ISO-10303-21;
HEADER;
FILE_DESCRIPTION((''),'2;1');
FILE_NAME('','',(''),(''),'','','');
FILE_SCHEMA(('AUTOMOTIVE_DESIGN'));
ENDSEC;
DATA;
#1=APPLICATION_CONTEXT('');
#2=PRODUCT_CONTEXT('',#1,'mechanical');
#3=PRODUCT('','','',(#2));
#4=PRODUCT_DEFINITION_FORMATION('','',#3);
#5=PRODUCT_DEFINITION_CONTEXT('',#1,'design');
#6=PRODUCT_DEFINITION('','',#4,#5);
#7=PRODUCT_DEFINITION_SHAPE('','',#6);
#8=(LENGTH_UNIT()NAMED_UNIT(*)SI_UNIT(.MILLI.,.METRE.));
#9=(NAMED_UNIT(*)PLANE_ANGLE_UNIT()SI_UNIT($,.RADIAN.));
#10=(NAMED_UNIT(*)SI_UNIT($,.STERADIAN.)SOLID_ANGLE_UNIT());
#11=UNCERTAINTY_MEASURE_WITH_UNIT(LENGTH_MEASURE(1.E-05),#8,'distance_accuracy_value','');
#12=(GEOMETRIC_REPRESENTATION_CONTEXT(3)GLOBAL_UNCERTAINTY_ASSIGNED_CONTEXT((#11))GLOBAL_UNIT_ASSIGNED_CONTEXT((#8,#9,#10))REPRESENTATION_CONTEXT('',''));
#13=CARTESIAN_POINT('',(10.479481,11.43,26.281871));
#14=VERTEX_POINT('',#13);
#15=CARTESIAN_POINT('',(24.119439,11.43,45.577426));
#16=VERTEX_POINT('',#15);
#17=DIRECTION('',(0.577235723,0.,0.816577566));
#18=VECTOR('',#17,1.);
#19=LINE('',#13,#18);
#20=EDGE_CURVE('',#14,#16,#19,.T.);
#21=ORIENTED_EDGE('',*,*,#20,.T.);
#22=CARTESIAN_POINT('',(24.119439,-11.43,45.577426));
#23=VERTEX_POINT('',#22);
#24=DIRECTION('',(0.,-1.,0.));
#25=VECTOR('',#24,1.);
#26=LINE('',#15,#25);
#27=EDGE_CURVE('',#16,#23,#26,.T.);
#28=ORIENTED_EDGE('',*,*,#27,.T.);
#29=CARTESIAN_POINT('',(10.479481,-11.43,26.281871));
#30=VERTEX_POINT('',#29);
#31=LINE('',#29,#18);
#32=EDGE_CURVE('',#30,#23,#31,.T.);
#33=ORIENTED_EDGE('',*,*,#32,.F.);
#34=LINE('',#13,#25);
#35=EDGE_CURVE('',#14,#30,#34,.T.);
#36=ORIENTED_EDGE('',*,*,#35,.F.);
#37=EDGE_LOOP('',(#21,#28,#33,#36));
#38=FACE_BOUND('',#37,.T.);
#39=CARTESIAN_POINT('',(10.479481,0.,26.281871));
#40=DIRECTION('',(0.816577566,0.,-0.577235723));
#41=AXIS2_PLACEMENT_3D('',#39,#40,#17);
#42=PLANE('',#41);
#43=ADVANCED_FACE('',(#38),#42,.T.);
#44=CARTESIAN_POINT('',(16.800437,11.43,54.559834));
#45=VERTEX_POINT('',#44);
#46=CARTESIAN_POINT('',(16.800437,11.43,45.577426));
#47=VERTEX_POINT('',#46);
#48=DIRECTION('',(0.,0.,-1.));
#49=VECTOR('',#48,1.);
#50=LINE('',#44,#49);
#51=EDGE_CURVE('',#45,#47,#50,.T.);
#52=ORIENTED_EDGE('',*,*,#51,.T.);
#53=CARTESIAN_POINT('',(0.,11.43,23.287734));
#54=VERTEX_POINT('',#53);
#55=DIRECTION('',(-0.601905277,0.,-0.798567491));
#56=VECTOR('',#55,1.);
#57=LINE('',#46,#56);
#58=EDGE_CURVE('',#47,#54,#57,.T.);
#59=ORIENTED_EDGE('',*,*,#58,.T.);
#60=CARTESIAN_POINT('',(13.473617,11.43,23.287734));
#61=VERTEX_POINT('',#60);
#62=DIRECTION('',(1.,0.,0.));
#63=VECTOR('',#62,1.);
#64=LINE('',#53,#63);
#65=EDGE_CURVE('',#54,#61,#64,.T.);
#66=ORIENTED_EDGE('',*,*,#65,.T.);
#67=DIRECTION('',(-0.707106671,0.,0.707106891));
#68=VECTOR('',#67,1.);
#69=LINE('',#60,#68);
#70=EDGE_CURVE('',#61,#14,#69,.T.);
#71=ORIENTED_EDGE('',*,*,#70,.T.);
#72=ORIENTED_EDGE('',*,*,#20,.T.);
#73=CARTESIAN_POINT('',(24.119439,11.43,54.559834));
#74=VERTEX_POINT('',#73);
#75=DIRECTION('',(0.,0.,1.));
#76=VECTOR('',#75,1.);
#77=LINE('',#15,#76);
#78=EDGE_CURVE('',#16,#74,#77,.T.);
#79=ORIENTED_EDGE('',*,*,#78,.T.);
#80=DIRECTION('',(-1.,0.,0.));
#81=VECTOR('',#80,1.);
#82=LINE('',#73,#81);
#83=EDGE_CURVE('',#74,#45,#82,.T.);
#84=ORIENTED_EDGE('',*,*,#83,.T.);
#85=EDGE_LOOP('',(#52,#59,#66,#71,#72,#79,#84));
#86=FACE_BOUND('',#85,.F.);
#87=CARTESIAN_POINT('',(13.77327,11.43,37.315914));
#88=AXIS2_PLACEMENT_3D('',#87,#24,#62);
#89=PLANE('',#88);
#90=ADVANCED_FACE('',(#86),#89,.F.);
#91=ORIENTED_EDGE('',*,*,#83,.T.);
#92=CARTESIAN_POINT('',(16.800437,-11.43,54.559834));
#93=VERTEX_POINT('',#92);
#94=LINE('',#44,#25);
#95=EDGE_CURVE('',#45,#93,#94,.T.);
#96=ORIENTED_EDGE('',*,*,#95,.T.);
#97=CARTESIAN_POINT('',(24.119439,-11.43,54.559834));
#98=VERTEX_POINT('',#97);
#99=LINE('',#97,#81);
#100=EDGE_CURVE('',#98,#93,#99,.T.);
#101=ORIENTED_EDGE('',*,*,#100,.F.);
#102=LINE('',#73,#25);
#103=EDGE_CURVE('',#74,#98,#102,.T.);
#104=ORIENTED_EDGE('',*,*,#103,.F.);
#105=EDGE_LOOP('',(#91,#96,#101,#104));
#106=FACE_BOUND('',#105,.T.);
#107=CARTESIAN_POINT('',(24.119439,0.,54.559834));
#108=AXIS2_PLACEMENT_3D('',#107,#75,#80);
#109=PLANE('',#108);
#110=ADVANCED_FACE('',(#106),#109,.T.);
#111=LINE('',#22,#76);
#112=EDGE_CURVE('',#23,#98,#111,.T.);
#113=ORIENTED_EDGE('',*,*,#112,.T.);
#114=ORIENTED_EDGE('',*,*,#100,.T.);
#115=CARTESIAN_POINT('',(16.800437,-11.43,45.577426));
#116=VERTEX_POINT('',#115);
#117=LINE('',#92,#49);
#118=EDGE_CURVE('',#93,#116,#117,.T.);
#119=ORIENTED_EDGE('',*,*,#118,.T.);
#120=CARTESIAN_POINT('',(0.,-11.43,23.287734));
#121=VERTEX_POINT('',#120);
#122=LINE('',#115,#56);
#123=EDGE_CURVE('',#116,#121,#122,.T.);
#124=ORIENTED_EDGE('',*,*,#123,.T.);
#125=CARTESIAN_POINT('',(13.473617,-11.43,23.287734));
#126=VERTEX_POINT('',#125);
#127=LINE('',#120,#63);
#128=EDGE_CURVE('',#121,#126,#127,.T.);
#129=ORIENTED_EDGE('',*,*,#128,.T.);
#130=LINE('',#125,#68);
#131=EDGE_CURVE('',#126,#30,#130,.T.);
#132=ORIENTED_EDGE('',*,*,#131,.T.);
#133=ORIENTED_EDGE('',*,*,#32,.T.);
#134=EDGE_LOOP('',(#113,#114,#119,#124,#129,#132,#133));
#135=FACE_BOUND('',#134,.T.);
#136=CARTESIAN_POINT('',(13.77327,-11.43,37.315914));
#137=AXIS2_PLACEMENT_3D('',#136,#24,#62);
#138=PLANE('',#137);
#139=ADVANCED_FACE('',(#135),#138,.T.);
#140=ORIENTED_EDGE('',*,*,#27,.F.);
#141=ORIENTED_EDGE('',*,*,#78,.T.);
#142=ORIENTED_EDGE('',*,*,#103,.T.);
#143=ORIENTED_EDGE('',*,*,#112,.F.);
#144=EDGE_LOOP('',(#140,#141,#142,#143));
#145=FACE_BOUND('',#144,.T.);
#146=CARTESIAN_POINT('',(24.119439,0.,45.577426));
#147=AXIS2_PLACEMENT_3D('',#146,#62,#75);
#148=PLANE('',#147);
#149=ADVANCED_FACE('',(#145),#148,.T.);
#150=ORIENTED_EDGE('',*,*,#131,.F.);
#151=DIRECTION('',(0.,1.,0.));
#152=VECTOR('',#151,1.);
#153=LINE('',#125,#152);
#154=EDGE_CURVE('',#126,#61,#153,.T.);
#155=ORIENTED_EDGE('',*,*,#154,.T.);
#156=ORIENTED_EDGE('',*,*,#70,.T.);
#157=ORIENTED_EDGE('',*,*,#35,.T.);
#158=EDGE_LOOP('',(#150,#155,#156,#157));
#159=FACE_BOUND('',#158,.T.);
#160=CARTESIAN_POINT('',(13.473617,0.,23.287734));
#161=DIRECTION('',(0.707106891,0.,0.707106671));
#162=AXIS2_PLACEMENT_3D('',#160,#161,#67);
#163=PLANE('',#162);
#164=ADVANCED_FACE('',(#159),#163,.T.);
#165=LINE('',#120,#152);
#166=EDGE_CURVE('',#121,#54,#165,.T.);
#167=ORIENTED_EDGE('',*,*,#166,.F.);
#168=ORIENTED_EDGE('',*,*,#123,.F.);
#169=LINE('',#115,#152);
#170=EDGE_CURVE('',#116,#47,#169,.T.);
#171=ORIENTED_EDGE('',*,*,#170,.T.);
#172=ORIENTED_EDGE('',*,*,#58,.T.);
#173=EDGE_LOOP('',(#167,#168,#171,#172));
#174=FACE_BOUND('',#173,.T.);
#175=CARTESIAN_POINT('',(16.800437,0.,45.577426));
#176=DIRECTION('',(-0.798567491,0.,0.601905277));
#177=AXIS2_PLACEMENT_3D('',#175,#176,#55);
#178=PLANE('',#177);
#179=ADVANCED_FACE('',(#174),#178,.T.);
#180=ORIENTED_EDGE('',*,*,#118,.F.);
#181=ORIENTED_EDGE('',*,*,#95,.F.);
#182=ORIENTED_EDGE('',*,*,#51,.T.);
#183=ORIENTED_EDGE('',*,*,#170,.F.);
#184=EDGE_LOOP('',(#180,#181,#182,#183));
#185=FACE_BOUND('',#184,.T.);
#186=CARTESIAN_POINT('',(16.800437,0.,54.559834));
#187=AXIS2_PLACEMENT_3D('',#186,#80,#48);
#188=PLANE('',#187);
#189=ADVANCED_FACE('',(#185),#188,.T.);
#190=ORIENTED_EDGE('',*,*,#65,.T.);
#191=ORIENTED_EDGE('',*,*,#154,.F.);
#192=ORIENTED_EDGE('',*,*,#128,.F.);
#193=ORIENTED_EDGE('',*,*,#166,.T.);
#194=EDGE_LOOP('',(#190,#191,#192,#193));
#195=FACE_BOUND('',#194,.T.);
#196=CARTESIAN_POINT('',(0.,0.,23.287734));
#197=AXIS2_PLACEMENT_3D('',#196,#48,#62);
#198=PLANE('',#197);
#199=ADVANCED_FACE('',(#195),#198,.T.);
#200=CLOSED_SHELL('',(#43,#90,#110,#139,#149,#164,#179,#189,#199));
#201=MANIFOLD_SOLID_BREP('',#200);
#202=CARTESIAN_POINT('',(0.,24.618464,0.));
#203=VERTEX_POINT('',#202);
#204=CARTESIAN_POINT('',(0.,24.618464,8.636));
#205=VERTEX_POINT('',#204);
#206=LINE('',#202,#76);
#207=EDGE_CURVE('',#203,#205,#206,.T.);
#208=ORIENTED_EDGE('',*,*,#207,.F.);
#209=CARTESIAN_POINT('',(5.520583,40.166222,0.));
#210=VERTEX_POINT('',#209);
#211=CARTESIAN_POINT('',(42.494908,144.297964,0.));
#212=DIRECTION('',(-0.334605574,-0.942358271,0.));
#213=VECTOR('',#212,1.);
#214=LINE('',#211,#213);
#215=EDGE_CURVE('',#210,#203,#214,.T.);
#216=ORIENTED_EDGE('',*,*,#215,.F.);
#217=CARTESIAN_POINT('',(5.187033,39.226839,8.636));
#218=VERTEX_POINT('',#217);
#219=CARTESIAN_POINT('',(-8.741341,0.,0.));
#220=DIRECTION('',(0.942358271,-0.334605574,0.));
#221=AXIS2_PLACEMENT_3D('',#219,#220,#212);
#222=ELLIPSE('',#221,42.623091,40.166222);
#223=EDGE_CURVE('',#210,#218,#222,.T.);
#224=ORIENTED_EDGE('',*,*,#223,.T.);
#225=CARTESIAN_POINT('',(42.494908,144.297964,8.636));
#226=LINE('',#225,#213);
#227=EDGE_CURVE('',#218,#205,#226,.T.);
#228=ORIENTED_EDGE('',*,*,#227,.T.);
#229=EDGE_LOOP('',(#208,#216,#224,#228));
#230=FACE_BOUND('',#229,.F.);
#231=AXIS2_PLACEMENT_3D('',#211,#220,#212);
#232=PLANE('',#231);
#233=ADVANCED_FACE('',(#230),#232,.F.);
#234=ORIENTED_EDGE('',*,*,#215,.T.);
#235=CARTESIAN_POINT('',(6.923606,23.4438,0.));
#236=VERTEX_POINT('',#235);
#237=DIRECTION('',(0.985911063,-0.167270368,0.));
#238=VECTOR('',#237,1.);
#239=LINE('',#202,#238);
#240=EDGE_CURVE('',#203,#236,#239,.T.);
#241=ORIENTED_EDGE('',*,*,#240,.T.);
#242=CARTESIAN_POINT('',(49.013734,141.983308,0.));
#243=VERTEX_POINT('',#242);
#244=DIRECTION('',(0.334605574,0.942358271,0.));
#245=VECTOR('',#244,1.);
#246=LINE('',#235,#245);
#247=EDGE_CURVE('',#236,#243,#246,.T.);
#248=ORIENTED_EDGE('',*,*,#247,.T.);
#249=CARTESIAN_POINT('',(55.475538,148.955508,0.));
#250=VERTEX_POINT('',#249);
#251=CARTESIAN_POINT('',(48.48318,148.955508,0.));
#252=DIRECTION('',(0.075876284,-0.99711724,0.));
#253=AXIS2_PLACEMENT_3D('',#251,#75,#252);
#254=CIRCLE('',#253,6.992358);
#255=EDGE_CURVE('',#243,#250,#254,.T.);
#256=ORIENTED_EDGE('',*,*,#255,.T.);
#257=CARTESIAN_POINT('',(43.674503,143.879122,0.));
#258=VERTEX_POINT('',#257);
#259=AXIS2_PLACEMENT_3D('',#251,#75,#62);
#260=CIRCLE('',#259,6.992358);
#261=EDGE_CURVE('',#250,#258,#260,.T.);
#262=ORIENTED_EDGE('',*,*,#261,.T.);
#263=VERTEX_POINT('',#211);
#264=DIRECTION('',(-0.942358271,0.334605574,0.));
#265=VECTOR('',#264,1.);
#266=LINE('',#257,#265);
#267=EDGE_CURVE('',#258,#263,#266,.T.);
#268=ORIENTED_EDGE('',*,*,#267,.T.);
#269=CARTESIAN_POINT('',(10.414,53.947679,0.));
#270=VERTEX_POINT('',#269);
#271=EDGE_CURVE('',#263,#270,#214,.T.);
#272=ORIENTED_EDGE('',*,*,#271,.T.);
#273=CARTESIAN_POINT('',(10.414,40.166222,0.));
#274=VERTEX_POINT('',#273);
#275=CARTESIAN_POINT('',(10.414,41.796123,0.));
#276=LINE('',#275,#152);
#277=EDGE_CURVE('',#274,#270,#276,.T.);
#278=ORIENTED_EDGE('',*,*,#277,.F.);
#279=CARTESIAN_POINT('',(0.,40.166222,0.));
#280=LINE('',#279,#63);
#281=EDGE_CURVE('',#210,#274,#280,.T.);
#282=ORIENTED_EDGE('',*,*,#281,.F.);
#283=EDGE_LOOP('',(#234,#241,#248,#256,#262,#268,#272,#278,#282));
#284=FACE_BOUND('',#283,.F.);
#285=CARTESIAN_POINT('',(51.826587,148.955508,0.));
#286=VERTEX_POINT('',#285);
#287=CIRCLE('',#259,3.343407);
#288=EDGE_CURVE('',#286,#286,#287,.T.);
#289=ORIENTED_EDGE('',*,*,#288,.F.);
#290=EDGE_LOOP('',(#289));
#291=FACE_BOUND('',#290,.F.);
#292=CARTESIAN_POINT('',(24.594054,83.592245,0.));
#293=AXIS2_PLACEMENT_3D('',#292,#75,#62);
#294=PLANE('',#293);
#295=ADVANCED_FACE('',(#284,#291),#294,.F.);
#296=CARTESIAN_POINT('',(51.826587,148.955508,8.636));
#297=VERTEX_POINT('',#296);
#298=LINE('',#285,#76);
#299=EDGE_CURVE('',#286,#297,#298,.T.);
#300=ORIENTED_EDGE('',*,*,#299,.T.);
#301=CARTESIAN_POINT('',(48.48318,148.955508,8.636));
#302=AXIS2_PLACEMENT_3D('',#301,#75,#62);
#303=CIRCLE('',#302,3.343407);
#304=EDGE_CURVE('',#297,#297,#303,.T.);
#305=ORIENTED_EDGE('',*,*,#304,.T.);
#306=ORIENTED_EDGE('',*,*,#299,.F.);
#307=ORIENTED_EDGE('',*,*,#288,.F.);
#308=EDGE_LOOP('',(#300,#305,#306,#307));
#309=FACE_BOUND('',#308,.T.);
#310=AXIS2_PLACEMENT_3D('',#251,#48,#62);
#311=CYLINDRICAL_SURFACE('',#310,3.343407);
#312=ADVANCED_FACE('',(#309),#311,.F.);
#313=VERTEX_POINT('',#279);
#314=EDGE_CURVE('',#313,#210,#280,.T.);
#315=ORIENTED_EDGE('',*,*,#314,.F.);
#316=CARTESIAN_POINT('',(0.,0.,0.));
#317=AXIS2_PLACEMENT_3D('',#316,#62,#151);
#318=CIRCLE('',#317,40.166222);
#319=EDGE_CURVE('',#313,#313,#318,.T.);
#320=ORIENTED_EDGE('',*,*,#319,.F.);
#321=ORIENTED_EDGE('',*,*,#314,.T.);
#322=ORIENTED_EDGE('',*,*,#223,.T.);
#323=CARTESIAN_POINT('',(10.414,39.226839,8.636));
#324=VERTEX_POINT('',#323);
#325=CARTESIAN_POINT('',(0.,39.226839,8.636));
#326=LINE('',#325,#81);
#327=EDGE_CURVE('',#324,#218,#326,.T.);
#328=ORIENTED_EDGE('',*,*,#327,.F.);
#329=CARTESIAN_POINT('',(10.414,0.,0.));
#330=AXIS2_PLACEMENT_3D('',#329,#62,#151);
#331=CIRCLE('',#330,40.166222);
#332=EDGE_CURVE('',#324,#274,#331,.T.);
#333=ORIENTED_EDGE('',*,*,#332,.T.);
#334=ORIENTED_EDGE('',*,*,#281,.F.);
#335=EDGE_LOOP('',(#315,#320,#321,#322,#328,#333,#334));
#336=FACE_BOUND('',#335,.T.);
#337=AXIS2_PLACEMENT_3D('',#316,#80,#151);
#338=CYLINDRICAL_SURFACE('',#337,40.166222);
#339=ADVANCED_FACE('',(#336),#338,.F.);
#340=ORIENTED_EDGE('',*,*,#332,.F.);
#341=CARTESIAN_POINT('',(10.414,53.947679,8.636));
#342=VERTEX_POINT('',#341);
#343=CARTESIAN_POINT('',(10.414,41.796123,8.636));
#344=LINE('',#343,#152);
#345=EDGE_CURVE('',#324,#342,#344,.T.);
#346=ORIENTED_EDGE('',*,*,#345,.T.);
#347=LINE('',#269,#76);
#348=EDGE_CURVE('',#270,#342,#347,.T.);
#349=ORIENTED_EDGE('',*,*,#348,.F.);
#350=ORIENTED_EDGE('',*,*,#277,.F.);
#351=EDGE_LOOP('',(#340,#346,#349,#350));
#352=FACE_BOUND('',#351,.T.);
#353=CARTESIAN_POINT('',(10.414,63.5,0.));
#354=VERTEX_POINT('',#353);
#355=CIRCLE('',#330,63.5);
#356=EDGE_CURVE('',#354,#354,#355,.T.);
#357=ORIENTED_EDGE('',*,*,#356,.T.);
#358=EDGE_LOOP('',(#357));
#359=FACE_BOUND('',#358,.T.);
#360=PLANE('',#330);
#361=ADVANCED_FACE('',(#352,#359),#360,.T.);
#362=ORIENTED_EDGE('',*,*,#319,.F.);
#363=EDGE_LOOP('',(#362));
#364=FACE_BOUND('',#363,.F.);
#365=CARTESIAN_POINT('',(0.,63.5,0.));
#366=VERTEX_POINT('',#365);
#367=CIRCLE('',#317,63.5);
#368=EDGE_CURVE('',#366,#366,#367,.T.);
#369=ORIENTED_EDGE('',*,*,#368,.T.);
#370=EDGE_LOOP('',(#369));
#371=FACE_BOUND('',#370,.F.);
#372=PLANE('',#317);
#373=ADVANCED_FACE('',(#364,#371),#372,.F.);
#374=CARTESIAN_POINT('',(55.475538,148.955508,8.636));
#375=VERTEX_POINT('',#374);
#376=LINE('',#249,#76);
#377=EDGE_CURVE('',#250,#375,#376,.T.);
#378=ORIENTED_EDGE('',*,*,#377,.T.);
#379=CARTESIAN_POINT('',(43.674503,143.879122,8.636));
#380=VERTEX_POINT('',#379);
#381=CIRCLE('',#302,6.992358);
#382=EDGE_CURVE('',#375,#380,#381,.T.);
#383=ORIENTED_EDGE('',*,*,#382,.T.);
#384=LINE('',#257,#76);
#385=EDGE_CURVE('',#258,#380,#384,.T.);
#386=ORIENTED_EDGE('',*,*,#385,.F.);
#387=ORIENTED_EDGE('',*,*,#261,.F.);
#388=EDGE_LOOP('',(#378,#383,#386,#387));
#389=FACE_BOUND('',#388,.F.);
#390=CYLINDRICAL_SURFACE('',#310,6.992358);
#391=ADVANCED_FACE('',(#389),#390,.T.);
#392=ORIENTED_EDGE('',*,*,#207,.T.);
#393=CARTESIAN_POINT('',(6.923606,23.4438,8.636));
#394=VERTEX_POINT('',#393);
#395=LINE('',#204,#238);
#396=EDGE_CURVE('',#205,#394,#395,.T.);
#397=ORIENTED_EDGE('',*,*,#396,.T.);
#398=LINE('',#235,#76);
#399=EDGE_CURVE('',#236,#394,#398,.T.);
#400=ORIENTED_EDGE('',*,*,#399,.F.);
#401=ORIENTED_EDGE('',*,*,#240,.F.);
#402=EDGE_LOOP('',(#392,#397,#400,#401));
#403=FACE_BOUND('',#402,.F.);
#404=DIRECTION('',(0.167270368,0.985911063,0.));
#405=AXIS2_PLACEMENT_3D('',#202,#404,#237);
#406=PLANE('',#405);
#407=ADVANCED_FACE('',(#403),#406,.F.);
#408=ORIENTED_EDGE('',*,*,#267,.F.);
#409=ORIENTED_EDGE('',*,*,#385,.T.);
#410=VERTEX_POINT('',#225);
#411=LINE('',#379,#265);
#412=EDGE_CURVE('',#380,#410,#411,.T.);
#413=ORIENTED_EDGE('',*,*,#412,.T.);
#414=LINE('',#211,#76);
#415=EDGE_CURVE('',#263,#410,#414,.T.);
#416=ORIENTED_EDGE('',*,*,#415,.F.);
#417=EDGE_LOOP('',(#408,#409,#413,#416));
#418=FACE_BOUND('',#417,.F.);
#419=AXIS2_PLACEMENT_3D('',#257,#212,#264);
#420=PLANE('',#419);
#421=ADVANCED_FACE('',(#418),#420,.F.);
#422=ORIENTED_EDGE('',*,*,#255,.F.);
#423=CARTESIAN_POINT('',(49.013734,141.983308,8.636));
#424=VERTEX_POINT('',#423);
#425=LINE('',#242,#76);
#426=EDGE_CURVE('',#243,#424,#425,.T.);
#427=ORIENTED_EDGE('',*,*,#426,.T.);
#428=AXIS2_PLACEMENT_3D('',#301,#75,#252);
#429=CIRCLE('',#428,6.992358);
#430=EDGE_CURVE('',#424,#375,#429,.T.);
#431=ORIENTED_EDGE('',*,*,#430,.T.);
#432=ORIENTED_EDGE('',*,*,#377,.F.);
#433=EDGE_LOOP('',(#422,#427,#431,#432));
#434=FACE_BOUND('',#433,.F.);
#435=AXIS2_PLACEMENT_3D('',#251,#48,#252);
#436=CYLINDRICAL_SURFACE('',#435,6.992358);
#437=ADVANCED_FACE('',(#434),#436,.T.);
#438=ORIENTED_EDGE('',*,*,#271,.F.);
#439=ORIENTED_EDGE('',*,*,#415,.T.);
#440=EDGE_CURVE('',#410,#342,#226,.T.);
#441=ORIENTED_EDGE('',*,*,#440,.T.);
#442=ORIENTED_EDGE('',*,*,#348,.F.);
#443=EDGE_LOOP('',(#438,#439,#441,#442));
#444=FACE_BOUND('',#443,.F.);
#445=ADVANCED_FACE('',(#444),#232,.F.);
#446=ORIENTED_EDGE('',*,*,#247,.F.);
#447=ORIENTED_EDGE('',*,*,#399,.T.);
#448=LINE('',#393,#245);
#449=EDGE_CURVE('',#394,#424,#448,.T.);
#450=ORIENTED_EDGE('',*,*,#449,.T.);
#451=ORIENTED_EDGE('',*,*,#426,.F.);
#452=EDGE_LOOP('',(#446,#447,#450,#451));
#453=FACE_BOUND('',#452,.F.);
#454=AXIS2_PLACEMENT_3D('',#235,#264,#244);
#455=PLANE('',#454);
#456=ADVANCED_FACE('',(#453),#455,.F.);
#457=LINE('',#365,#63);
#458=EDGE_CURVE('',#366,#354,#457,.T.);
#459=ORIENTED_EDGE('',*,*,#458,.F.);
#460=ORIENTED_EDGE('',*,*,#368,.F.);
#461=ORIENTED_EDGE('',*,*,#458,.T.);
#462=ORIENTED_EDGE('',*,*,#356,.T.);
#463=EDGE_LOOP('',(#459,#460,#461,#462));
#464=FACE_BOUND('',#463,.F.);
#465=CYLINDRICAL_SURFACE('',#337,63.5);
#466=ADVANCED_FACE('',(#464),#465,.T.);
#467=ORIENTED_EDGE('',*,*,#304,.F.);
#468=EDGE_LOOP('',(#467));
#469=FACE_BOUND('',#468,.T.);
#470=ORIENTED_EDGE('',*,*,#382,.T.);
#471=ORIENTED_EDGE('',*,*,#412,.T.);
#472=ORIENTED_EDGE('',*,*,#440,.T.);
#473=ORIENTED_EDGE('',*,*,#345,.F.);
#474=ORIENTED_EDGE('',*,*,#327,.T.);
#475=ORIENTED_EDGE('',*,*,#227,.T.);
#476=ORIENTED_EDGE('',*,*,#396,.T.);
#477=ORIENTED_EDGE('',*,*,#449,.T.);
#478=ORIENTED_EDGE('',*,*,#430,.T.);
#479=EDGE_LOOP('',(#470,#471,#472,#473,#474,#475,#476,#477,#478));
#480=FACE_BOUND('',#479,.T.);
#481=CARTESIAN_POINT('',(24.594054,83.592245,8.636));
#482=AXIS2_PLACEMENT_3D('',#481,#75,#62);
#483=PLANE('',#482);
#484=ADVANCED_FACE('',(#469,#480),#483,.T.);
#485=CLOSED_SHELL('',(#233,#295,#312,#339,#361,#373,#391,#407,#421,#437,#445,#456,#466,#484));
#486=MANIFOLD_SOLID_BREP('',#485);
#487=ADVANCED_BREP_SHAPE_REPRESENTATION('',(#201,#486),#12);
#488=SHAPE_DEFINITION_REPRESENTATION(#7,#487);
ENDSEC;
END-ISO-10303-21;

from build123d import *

# Parameters (mm, degrees)
F1_R     = 3.3434072236
F2_DEPTH = 8.636
F0_R     = 63.5
F0_R_2   = 40.1662219946
F3_DEPTH = 10.414
F5_DEPTH = 11.43


# Not quite as in the source:
# - a feature of the source that left no trace in its solid (it failed there, or was rolled back) is left out


with BuildPart() as f2:
    # F1 (on Top) → F2 (new body)
    with BuildSketch(Plane.XY):
        with BuildLine():
            Line((42.4949078619, 144.2979639482), (0, 24.6184635907))
            Line((0, 24.6184635907), (6.9236060732, 23.4437996919))
            Line((6.9236060732, 23.4437996919), (49.013733896, 141.9833076298))
            ThreePointArc((49.013733896, 141.9833076298), (46.1434978735, 142.3662019346), (43.6745030246, 143.8791220613))
            Line((43.6745030246, 143.8791220613), (42.4949078619, 144.2979639482))
        make_face()
        with BuildLine():
            ThreePointArc((55.4755375751, 148.9555081438), (45.7201126941, 155.3787883051), (43.6745030246, 143.8791220613))
            Line((43.6745030246, 143.8791220613), (49.013733896, 141.9833076298))
            ThreePointArc((49.013733896, 141.9833076298), (53.6116733091, 144.2024436904), (55.4755375751, 148.9555081438))
        make_face()
        with Locations((48.4831797689, 148.9555081438)):
            Circle(F1_R, mode=Mode.SUBTRACT)
        with BuildLine():
            Line((49.013733896, 141.9833076298), (43.6745030246, 143.8791220613))
            ThreePointArc((43.6745030246, 143.8791220613), (46.1434978735, 142.3662019346), (49.013733896, 141.9833076298))
        make_face()
    extrude(amount=F2_DEPTH)

    # F0 (on Right) → F3 (join)
    with BuildSketch(Plane.YZ):
        Circle(F0_R)
        Circle(F0_R_2, mode=Mode.SUBTRACT)
    extrude(amount=F3_DEPTH)


with BuildPart() as f5:
    # F4 (on Front) → F5 (new body, symmetric)
    with BuildSketch(Plane.XZ):
        Polygon((13.473616913, 23.2877340168), (10.4794809595, 26.2818709016), (24.1194386035, 45.5774255097), (24.1194386035, 54.5598343015), (16.8004371226, 54.5598343015), (16.8004371226, 45.5774255097), (0, 23.2877340168), align=None)
    extrude(amount=F5_DEPTH, both=True)


solid = Compound([f2.part, f5.part])
